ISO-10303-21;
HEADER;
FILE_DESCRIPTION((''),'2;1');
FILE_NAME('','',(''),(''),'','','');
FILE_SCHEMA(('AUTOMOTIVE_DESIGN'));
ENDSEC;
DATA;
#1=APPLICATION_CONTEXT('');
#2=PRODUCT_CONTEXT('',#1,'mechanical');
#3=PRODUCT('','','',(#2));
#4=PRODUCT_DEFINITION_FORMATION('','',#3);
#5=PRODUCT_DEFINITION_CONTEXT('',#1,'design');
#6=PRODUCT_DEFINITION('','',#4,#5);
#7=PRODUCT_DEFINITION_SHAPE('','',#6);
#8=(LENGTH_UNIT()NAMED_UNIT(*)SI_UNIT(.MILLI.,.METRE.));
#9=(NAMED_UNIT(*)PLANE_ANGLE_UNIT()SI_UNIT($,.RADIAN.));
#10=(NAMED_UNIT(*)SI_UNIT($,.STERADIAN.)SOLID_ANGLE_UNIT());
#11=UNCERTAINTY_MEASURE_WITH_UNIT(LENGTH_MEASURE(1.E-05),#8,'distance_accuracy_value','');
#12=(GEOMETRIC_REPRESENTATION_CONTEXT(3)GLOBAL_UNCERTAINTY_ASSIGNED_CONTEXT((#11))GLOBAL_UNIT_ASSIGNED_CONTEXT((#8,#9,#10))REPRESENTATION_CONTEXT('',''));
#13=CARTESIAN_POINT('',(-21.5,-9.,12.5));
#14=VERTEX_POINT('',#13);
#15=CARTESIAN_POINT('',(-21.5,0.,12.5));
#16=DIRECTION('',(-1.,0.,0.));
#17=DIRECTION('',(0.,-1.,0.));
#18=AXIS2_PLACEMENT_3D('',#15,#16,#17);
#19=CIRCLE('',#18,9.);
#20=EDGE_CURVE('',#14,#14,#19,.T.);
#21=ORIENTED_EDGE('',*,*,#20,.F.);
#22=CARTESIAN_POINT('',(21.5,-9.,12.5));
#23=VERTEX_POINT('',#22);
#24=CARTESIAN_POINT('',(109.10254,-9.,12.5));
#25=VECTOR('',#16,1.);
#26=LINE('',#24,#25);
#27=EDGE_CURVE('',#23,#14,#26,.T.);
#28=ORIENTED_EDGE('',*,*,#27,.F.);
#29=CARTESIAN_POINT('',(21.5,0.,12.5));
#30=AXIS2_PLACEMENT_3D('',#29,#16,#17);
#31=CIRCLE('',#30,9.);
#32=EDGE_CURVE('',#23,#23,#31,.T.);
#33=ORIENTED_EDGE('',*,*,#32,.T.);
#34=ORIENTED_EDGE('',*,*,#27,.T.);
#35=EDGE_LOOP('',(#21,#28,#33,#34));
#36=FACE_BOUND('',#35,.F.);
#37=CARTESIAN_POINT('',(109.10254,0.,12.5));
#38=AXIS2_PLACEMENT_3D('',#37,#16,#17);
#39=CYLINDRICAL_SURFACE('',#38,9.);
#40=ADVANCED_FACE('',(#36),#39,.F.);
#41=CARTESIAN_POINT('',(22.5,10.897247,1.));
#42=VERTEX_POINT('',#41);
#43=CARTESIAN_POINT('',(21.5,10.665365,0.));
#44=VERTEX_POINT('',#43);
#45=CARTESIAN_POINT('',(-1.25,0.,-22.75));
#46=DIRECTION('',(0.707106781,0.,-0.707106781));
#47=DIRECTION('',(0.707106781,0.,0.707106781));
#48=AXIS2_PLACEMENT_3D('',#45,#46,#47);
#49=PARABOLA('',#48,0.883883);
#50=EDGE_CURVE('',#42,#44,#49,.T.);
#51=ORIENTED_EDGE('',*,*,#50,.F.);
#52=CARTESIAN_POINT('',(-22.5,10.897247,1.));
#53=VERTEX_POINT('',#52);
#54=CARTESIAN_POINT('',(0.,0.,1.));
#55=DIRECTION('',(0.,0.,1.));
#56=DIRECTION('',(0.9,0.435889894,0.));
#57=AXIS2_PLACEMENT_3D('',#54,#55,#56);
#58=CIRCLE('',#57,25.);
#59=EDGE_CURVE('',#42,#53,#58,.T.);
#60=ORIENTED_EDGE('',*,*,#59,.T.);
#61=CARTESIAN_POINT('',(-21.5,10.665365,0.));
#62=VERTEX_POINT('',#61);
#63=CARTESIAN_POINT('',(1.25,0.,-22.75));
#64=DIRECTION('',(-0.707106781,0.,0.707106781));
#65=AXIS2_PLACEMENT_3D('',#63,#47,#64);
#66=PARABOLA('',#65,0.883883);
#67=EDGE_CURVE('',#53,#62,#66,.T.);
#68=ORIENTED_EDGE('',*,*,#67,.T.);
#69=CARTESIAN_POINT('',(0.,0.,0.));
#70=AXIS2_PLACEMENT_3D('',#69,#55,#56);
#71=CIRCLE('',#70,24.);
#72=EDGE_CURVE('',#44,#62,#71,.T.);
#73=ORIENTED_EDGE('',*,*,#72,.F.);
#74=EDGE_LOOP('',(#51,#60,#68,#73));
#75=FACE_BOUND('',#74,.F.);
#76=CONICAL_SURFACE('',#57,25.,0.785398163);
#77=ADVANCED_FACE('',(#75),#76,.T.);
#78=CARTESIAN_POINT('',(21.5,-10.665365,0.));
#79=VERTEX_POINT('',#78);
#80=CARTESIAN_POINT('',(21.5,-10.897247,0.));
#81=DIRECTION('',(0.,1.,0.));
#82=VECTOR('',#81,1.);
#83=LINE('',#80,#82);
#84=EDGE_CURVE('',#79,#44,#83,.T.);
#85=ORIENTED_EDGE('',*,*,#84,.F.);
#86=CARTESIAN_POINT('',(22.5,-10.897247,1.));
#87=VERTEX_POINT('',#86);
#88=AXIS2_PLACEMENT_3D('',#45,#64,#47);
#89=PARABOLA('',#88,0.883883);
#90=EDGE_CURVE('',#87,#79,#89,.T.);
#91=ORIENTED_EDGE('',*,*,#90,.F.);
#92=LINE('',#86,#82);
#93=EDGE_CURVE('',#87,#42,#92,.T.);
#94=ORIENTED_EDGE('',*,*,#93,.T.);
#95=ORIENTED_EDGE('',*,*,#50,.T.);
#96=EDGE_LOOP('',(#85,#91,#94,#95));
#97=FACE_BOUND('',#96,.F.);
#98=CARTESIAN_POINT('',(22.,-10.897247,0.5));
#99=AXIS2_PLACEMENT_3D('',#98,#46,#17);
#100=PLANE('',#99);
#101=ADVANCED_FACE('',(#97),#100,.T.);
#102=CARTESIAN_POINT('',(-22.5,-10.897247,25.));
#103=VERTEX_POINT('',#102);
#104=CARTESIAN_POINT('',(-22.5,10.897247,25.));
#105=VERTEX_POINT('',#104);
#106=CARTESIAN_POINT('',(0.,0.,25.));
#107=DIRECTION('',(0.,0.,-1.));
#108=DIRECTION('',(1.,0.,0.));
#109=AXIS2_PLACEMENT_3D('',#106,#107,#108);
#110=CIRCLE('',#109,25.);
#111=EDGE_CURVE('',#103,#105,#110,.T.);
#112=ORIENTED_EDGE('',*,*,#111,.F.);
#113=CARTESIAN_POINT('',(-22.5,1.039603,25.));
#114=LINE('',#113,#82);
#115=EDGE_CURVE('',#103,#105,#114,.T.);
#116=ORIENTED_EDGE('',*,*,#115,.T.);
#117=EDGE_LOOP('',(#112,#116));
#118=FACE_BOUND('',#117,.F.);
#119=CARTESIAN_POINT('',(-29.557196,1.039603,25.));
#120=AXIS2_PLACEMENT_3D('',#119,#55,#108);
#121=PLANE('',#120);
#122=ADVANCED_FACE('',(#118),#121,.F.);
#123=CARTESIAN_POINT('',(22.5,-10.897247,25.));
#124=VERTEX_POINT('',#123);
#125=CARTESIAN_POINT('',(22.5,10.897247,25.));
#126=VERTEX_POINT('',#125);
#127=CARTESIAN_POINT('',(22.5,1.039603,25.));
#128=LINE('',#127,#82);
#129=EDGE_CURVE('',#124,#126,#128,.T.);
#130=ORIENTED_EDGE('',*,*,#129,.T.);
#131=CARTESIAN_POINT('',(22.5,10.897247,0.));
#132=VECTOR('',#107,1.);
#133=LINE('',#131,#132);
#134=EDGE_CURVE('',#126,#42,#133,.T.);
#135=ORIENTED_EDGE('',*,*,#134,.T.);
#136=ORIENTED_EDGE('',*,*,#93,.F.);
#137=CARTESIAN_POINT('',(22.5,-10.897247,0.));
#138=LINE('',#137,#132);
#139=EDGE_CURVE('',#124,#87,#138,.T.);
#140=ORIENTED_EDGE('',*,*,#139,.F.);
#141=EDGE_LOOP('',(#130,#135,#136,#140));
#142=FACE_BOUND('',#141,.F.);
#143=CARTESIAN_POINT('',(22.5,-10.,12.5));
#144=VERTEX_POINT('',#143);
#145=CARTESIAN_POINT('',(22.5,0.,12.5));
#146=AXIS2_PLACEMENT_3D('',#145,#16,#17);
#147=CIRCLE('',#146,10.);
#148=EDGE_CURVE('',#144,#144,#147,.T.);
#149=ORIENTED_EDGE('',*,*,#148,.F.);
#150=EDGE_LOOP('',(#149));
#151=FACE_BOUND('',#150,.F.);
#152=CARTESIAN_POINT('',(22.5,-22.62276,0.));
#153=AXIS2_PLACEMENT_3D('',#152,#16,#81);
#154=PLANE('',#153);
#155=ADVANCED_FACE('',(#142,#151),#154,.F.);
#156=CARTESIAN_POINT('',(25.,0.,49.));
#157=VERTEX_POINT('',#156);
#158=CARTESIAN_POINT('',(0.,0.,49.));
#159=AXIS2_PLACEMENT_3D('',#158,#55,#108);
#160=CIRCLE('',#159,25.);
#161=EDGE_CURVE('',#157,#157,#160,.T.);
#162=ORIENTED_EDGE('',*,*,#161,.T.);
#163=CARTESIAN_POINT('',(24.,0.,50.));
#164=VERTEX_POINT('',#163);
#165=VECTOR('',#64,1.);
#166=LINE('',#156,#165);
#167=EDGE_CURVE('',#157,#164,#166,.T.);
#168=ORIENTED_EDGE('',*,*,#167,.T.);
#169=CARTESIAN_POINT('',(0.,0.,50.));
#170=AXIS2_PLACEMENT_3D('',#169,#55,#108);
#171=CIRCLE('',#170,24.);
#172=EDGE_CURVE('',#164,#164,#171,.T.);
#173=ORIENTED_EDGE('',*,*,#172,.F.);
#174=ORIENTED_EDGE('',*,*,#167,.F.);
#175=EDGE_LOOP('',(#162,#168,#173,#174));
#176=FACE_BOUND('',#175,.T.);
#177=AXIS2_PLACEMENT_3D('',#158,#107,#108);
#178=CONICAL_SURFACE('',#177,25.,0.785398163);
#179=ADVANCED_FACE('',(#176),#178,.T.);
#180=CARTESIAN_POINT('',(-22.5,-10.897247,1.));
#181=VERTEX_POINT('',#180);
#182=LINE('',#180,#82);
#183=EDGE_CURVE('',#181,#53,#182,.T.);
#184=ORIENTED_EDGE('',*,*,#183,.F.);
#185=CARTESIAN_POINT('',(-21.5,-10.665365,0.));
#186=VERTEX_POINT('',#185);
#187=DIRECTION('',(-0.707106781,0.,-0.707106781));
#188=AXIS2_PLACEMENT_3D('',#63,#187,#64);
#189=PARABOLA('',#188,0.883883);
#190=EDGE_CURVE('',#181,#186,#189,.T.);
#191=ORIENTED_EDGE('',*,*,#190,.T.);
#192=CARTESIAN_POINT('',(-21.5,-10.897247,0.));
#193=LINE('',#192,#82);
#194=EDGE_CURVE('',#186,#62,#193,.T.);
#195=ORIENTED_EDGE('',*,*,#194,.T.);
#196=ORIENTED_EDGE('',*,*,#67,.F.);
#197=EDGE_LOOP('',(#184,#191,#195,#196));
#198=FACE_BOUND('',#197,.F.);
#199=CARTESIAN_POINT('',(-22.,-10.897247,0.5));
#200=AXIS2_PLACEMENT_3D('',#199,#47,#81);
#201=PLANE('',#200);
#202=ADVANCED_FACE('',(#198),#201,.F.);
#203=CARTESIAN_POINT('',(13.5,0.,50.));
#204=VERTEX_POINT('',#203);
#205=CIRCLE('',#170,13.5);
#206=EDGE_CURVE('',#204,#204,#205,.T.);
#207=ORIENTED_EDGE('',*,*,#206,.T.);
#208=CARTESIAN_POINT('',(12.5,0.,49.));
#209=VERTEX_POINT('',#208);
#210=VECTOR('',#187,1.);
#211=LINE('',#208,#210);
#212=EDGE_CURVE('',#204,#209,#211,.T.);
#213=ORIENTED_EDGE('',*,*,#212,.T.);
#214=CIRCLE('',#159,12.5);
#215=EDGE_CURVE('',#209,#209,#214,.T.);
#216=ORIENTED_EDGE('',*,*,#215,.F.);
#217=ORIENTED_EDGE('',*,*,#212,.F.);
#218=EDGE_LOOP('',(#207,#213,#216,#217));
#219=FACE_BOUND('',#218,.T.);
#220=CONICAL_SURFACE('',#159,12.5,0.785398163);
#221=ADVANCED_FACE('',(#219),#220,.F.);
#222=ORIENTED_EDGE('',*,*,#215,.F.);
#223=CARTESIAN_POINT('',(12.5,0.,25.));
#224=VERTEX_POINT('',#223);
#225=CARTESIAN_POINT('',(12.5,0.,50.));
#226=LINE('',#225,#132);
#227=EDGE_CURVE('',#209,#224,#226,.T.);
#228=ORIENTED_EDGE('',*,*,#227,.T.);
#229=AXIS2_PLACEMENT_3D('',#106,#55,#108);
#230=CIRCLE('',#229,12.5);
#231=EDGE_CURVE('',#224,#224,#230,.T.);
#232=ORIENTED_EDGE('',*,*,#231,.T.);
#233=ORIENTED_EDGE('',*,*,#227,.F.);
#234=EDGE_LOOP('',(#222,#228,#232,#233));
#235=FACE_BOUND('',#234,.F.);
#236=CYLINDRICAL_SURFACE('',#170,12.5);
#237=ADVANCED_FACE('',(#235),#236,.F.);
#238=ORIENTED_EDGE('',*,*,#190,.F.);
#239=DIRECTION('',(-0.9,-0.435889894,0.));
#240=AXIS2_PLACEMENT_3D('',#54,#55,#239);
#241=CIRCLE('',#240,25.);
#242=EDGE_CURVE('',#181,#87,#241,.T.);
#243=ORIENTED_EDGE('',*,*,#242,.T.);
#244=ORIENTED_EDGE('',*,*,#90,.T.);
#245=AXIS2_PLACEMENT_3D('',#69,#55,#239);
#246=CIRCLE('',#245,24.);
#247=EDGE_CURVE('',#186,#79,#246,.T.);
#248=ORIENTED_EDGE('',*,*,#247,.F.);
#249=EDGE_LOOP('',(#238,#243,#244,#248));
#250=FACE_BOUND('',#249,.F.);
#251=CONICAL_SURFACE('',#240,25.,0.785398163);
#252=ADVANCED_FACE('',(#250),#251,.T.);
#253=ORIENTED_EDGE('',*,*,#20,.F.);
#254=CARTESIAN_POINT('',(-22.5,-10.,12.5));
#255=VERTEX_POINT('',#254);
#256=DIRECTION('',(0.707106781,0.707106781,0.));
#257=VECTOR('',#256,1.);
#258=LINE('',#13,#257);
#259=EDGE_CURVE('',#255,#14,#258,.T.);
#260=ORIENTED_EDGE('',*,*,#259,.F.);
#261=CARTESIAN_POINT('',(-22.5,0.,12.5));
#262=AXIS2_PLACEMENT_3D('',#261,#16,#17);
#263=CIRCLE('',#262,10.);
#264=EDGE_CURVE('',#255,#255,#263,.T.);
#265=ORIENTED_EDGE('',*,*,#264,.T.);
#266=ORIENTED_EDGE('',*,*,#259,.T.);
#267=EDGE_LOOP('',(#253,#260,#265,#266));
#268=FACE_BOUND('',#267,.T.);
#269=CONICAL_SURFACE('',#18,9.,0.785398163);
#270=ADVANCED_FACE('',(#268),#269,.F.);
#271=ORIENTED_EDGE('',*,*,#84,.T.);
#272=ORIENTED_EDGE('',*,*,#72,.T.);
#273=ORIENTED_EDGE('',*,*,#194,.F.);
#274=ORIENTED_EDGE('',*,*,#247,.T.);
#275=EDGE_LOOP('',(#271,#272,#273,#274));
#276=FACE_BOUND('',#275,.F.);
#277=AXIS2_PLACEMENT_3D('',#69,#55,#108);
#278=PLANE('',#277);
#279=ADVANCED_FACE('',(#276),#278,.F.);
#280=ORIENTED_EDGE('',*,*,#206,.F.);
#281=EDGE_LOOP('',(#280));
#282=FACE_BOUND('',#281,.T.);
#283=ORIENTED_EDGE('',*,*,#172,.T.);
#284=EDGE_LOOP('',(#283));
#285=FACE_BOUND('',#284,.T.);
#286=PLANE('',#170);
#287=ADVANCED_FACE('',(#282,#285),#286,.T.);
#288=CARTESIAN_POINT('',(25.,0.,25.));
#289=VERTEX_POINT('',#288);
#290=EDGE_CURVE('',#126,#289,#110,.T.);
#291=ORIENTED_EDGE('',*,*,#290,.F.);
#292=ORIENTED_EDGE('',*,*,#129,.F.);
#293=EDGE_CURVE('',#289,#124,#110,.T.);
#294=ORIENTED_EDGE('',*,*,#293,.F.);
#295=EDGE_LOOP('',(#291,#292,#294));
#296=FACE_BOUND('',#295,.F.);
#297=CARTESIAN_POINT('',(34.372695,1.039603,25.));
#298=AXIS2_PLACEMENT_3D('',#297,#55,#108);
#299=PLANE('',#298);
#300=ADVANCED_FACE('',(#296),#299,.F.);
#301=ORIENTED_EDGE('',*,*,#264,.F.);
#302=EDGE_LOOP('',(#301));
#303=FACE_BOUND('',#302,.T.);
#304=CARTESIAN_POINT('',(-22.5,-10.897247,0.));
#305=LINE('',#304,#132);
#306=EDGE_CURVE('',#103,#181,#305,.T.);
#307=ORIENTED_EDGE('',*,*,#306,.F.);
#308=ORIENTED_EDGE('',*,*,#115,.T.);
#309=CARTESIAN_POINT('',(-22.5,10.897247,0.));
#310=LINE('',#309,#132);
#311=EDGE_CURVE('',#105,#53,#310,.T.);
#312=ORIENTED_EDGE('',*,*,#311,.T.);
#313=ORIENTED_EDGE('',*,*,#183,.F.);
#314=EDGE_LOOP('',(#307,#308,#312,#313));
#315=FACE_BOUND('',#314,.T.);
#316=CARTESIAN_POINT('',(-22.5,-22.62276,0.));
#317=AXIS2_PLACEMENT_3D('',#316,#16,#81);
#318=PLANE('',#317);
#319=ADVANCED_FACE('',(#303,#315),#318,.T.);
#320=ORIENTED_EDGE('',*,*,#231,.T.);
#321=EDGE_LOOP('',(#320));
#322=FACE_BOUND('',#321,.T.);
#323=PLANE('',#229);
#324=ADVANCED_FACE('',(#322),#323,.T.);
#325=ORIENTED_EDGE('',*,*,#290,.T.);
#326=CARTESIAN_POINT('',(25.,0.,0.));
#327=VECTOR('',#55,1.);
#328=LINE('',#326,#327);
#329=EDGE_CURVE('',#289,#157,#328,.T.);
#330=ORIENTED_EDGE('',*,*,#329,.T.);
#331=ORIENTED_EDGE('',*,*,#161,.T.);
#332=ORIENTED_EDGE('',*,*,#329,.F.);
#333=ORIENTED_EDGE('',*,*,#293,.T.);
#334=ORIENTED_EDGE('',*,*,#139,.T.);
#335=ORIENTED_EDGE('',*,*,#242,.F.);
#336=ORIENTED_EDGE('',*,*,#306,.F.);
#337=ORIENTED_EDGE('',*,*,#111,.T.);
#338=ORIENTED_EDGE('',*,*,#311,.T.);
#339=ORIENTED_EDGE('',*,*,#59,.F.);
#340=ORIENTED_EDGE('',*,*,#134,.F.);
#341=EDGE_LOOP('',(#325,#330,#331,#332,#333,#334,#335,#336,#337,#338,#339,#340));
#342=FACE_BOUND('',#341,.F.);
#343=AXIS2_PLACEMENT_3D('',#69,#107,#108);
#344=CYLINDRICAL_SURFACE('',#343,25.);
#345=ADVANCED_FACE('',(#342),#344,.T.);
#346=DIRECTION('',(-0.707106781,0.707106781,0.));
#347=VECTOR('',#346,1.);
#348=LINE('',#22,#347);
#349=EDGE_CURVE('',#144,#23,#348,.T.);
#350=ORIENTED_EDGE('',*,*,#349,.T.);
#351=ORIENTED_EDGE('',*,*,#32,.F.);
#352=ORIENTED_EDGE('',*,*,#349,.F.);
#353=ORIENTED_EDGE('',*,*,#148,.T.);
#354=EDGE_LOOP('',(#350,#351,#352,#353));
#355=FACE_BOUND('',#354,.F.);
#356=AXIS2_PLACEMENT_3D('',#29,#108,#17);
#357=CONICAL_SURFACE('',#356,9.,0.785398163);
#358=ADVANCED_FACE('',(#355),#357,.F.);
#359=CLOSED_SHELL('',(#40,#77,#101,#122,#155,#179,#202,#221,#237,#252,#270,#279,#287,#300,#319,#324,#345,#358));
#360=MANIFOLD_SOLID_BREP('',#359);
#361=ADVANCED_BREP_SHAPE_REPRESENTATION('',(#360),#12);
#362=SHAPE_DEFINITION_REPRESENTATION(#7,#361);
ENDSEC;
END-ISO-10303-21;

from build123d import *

# Parameters (mm, degrees)
F0_R     = 25
F1_DEPTH = 50
F2_W     = 23.745389397
F2_H     = 47.3247256844
F2_W_2   = 14.1143929356
F3_DEPTH = 25
F5_D     = 18
F6_R     = 12.5
F7_DEPTH = 25
F8_SIZE  = 1


with BuildPart() as f1:
    # F0 (on Top) → F1 (new body)
    with BuildSketch(Plane.XY):
        Circle(F0_R)
    extrude(amount=F1_DEPTH)

    # F2 (on Top) → F3 (cut)
    with BuildSketch(Plane.XY):
        with Locations((34.3726946985, 1.0396027938)):
            Rectangle(F2_W, F2_H)
        with Locations((-29.5571964678, 1.0396027938)):
            Rectangle(F2_W_2, F2_H)
    extrude(amount=F3_DEPTH, mode=Mode.SUBTRACT)

    # F5 (through all)
    with Locations(Plane.YZ.offset(22.5)):
        with Locations((0, 12.5)):
            Hole(F5_D / 2)

    # F6 (on face) → F7 (cut)
    with BuildSketch(Plane.XY.offset(50)):
        Circle(F6_R)
    extrude(amount=-F7_DEPTH, mode=Mode.SUBTRACT)

    # F8
    f8_edges = [f1.edges().sort_by_distance(p)[0] for p in [
        (-25, 0, 50),
        (0, 25, 0),
        (0, -25, 0),
        (22.5, 0, 0),
        (-22.5, 0, 0),
        (-12.5, 0, 50),
        (22.5, -9, 12.5),
        (-22.5, -9, 12.5),
    ]]
    chamfer(f8_edges, length=F8_SIZE)


solid = f1.part
